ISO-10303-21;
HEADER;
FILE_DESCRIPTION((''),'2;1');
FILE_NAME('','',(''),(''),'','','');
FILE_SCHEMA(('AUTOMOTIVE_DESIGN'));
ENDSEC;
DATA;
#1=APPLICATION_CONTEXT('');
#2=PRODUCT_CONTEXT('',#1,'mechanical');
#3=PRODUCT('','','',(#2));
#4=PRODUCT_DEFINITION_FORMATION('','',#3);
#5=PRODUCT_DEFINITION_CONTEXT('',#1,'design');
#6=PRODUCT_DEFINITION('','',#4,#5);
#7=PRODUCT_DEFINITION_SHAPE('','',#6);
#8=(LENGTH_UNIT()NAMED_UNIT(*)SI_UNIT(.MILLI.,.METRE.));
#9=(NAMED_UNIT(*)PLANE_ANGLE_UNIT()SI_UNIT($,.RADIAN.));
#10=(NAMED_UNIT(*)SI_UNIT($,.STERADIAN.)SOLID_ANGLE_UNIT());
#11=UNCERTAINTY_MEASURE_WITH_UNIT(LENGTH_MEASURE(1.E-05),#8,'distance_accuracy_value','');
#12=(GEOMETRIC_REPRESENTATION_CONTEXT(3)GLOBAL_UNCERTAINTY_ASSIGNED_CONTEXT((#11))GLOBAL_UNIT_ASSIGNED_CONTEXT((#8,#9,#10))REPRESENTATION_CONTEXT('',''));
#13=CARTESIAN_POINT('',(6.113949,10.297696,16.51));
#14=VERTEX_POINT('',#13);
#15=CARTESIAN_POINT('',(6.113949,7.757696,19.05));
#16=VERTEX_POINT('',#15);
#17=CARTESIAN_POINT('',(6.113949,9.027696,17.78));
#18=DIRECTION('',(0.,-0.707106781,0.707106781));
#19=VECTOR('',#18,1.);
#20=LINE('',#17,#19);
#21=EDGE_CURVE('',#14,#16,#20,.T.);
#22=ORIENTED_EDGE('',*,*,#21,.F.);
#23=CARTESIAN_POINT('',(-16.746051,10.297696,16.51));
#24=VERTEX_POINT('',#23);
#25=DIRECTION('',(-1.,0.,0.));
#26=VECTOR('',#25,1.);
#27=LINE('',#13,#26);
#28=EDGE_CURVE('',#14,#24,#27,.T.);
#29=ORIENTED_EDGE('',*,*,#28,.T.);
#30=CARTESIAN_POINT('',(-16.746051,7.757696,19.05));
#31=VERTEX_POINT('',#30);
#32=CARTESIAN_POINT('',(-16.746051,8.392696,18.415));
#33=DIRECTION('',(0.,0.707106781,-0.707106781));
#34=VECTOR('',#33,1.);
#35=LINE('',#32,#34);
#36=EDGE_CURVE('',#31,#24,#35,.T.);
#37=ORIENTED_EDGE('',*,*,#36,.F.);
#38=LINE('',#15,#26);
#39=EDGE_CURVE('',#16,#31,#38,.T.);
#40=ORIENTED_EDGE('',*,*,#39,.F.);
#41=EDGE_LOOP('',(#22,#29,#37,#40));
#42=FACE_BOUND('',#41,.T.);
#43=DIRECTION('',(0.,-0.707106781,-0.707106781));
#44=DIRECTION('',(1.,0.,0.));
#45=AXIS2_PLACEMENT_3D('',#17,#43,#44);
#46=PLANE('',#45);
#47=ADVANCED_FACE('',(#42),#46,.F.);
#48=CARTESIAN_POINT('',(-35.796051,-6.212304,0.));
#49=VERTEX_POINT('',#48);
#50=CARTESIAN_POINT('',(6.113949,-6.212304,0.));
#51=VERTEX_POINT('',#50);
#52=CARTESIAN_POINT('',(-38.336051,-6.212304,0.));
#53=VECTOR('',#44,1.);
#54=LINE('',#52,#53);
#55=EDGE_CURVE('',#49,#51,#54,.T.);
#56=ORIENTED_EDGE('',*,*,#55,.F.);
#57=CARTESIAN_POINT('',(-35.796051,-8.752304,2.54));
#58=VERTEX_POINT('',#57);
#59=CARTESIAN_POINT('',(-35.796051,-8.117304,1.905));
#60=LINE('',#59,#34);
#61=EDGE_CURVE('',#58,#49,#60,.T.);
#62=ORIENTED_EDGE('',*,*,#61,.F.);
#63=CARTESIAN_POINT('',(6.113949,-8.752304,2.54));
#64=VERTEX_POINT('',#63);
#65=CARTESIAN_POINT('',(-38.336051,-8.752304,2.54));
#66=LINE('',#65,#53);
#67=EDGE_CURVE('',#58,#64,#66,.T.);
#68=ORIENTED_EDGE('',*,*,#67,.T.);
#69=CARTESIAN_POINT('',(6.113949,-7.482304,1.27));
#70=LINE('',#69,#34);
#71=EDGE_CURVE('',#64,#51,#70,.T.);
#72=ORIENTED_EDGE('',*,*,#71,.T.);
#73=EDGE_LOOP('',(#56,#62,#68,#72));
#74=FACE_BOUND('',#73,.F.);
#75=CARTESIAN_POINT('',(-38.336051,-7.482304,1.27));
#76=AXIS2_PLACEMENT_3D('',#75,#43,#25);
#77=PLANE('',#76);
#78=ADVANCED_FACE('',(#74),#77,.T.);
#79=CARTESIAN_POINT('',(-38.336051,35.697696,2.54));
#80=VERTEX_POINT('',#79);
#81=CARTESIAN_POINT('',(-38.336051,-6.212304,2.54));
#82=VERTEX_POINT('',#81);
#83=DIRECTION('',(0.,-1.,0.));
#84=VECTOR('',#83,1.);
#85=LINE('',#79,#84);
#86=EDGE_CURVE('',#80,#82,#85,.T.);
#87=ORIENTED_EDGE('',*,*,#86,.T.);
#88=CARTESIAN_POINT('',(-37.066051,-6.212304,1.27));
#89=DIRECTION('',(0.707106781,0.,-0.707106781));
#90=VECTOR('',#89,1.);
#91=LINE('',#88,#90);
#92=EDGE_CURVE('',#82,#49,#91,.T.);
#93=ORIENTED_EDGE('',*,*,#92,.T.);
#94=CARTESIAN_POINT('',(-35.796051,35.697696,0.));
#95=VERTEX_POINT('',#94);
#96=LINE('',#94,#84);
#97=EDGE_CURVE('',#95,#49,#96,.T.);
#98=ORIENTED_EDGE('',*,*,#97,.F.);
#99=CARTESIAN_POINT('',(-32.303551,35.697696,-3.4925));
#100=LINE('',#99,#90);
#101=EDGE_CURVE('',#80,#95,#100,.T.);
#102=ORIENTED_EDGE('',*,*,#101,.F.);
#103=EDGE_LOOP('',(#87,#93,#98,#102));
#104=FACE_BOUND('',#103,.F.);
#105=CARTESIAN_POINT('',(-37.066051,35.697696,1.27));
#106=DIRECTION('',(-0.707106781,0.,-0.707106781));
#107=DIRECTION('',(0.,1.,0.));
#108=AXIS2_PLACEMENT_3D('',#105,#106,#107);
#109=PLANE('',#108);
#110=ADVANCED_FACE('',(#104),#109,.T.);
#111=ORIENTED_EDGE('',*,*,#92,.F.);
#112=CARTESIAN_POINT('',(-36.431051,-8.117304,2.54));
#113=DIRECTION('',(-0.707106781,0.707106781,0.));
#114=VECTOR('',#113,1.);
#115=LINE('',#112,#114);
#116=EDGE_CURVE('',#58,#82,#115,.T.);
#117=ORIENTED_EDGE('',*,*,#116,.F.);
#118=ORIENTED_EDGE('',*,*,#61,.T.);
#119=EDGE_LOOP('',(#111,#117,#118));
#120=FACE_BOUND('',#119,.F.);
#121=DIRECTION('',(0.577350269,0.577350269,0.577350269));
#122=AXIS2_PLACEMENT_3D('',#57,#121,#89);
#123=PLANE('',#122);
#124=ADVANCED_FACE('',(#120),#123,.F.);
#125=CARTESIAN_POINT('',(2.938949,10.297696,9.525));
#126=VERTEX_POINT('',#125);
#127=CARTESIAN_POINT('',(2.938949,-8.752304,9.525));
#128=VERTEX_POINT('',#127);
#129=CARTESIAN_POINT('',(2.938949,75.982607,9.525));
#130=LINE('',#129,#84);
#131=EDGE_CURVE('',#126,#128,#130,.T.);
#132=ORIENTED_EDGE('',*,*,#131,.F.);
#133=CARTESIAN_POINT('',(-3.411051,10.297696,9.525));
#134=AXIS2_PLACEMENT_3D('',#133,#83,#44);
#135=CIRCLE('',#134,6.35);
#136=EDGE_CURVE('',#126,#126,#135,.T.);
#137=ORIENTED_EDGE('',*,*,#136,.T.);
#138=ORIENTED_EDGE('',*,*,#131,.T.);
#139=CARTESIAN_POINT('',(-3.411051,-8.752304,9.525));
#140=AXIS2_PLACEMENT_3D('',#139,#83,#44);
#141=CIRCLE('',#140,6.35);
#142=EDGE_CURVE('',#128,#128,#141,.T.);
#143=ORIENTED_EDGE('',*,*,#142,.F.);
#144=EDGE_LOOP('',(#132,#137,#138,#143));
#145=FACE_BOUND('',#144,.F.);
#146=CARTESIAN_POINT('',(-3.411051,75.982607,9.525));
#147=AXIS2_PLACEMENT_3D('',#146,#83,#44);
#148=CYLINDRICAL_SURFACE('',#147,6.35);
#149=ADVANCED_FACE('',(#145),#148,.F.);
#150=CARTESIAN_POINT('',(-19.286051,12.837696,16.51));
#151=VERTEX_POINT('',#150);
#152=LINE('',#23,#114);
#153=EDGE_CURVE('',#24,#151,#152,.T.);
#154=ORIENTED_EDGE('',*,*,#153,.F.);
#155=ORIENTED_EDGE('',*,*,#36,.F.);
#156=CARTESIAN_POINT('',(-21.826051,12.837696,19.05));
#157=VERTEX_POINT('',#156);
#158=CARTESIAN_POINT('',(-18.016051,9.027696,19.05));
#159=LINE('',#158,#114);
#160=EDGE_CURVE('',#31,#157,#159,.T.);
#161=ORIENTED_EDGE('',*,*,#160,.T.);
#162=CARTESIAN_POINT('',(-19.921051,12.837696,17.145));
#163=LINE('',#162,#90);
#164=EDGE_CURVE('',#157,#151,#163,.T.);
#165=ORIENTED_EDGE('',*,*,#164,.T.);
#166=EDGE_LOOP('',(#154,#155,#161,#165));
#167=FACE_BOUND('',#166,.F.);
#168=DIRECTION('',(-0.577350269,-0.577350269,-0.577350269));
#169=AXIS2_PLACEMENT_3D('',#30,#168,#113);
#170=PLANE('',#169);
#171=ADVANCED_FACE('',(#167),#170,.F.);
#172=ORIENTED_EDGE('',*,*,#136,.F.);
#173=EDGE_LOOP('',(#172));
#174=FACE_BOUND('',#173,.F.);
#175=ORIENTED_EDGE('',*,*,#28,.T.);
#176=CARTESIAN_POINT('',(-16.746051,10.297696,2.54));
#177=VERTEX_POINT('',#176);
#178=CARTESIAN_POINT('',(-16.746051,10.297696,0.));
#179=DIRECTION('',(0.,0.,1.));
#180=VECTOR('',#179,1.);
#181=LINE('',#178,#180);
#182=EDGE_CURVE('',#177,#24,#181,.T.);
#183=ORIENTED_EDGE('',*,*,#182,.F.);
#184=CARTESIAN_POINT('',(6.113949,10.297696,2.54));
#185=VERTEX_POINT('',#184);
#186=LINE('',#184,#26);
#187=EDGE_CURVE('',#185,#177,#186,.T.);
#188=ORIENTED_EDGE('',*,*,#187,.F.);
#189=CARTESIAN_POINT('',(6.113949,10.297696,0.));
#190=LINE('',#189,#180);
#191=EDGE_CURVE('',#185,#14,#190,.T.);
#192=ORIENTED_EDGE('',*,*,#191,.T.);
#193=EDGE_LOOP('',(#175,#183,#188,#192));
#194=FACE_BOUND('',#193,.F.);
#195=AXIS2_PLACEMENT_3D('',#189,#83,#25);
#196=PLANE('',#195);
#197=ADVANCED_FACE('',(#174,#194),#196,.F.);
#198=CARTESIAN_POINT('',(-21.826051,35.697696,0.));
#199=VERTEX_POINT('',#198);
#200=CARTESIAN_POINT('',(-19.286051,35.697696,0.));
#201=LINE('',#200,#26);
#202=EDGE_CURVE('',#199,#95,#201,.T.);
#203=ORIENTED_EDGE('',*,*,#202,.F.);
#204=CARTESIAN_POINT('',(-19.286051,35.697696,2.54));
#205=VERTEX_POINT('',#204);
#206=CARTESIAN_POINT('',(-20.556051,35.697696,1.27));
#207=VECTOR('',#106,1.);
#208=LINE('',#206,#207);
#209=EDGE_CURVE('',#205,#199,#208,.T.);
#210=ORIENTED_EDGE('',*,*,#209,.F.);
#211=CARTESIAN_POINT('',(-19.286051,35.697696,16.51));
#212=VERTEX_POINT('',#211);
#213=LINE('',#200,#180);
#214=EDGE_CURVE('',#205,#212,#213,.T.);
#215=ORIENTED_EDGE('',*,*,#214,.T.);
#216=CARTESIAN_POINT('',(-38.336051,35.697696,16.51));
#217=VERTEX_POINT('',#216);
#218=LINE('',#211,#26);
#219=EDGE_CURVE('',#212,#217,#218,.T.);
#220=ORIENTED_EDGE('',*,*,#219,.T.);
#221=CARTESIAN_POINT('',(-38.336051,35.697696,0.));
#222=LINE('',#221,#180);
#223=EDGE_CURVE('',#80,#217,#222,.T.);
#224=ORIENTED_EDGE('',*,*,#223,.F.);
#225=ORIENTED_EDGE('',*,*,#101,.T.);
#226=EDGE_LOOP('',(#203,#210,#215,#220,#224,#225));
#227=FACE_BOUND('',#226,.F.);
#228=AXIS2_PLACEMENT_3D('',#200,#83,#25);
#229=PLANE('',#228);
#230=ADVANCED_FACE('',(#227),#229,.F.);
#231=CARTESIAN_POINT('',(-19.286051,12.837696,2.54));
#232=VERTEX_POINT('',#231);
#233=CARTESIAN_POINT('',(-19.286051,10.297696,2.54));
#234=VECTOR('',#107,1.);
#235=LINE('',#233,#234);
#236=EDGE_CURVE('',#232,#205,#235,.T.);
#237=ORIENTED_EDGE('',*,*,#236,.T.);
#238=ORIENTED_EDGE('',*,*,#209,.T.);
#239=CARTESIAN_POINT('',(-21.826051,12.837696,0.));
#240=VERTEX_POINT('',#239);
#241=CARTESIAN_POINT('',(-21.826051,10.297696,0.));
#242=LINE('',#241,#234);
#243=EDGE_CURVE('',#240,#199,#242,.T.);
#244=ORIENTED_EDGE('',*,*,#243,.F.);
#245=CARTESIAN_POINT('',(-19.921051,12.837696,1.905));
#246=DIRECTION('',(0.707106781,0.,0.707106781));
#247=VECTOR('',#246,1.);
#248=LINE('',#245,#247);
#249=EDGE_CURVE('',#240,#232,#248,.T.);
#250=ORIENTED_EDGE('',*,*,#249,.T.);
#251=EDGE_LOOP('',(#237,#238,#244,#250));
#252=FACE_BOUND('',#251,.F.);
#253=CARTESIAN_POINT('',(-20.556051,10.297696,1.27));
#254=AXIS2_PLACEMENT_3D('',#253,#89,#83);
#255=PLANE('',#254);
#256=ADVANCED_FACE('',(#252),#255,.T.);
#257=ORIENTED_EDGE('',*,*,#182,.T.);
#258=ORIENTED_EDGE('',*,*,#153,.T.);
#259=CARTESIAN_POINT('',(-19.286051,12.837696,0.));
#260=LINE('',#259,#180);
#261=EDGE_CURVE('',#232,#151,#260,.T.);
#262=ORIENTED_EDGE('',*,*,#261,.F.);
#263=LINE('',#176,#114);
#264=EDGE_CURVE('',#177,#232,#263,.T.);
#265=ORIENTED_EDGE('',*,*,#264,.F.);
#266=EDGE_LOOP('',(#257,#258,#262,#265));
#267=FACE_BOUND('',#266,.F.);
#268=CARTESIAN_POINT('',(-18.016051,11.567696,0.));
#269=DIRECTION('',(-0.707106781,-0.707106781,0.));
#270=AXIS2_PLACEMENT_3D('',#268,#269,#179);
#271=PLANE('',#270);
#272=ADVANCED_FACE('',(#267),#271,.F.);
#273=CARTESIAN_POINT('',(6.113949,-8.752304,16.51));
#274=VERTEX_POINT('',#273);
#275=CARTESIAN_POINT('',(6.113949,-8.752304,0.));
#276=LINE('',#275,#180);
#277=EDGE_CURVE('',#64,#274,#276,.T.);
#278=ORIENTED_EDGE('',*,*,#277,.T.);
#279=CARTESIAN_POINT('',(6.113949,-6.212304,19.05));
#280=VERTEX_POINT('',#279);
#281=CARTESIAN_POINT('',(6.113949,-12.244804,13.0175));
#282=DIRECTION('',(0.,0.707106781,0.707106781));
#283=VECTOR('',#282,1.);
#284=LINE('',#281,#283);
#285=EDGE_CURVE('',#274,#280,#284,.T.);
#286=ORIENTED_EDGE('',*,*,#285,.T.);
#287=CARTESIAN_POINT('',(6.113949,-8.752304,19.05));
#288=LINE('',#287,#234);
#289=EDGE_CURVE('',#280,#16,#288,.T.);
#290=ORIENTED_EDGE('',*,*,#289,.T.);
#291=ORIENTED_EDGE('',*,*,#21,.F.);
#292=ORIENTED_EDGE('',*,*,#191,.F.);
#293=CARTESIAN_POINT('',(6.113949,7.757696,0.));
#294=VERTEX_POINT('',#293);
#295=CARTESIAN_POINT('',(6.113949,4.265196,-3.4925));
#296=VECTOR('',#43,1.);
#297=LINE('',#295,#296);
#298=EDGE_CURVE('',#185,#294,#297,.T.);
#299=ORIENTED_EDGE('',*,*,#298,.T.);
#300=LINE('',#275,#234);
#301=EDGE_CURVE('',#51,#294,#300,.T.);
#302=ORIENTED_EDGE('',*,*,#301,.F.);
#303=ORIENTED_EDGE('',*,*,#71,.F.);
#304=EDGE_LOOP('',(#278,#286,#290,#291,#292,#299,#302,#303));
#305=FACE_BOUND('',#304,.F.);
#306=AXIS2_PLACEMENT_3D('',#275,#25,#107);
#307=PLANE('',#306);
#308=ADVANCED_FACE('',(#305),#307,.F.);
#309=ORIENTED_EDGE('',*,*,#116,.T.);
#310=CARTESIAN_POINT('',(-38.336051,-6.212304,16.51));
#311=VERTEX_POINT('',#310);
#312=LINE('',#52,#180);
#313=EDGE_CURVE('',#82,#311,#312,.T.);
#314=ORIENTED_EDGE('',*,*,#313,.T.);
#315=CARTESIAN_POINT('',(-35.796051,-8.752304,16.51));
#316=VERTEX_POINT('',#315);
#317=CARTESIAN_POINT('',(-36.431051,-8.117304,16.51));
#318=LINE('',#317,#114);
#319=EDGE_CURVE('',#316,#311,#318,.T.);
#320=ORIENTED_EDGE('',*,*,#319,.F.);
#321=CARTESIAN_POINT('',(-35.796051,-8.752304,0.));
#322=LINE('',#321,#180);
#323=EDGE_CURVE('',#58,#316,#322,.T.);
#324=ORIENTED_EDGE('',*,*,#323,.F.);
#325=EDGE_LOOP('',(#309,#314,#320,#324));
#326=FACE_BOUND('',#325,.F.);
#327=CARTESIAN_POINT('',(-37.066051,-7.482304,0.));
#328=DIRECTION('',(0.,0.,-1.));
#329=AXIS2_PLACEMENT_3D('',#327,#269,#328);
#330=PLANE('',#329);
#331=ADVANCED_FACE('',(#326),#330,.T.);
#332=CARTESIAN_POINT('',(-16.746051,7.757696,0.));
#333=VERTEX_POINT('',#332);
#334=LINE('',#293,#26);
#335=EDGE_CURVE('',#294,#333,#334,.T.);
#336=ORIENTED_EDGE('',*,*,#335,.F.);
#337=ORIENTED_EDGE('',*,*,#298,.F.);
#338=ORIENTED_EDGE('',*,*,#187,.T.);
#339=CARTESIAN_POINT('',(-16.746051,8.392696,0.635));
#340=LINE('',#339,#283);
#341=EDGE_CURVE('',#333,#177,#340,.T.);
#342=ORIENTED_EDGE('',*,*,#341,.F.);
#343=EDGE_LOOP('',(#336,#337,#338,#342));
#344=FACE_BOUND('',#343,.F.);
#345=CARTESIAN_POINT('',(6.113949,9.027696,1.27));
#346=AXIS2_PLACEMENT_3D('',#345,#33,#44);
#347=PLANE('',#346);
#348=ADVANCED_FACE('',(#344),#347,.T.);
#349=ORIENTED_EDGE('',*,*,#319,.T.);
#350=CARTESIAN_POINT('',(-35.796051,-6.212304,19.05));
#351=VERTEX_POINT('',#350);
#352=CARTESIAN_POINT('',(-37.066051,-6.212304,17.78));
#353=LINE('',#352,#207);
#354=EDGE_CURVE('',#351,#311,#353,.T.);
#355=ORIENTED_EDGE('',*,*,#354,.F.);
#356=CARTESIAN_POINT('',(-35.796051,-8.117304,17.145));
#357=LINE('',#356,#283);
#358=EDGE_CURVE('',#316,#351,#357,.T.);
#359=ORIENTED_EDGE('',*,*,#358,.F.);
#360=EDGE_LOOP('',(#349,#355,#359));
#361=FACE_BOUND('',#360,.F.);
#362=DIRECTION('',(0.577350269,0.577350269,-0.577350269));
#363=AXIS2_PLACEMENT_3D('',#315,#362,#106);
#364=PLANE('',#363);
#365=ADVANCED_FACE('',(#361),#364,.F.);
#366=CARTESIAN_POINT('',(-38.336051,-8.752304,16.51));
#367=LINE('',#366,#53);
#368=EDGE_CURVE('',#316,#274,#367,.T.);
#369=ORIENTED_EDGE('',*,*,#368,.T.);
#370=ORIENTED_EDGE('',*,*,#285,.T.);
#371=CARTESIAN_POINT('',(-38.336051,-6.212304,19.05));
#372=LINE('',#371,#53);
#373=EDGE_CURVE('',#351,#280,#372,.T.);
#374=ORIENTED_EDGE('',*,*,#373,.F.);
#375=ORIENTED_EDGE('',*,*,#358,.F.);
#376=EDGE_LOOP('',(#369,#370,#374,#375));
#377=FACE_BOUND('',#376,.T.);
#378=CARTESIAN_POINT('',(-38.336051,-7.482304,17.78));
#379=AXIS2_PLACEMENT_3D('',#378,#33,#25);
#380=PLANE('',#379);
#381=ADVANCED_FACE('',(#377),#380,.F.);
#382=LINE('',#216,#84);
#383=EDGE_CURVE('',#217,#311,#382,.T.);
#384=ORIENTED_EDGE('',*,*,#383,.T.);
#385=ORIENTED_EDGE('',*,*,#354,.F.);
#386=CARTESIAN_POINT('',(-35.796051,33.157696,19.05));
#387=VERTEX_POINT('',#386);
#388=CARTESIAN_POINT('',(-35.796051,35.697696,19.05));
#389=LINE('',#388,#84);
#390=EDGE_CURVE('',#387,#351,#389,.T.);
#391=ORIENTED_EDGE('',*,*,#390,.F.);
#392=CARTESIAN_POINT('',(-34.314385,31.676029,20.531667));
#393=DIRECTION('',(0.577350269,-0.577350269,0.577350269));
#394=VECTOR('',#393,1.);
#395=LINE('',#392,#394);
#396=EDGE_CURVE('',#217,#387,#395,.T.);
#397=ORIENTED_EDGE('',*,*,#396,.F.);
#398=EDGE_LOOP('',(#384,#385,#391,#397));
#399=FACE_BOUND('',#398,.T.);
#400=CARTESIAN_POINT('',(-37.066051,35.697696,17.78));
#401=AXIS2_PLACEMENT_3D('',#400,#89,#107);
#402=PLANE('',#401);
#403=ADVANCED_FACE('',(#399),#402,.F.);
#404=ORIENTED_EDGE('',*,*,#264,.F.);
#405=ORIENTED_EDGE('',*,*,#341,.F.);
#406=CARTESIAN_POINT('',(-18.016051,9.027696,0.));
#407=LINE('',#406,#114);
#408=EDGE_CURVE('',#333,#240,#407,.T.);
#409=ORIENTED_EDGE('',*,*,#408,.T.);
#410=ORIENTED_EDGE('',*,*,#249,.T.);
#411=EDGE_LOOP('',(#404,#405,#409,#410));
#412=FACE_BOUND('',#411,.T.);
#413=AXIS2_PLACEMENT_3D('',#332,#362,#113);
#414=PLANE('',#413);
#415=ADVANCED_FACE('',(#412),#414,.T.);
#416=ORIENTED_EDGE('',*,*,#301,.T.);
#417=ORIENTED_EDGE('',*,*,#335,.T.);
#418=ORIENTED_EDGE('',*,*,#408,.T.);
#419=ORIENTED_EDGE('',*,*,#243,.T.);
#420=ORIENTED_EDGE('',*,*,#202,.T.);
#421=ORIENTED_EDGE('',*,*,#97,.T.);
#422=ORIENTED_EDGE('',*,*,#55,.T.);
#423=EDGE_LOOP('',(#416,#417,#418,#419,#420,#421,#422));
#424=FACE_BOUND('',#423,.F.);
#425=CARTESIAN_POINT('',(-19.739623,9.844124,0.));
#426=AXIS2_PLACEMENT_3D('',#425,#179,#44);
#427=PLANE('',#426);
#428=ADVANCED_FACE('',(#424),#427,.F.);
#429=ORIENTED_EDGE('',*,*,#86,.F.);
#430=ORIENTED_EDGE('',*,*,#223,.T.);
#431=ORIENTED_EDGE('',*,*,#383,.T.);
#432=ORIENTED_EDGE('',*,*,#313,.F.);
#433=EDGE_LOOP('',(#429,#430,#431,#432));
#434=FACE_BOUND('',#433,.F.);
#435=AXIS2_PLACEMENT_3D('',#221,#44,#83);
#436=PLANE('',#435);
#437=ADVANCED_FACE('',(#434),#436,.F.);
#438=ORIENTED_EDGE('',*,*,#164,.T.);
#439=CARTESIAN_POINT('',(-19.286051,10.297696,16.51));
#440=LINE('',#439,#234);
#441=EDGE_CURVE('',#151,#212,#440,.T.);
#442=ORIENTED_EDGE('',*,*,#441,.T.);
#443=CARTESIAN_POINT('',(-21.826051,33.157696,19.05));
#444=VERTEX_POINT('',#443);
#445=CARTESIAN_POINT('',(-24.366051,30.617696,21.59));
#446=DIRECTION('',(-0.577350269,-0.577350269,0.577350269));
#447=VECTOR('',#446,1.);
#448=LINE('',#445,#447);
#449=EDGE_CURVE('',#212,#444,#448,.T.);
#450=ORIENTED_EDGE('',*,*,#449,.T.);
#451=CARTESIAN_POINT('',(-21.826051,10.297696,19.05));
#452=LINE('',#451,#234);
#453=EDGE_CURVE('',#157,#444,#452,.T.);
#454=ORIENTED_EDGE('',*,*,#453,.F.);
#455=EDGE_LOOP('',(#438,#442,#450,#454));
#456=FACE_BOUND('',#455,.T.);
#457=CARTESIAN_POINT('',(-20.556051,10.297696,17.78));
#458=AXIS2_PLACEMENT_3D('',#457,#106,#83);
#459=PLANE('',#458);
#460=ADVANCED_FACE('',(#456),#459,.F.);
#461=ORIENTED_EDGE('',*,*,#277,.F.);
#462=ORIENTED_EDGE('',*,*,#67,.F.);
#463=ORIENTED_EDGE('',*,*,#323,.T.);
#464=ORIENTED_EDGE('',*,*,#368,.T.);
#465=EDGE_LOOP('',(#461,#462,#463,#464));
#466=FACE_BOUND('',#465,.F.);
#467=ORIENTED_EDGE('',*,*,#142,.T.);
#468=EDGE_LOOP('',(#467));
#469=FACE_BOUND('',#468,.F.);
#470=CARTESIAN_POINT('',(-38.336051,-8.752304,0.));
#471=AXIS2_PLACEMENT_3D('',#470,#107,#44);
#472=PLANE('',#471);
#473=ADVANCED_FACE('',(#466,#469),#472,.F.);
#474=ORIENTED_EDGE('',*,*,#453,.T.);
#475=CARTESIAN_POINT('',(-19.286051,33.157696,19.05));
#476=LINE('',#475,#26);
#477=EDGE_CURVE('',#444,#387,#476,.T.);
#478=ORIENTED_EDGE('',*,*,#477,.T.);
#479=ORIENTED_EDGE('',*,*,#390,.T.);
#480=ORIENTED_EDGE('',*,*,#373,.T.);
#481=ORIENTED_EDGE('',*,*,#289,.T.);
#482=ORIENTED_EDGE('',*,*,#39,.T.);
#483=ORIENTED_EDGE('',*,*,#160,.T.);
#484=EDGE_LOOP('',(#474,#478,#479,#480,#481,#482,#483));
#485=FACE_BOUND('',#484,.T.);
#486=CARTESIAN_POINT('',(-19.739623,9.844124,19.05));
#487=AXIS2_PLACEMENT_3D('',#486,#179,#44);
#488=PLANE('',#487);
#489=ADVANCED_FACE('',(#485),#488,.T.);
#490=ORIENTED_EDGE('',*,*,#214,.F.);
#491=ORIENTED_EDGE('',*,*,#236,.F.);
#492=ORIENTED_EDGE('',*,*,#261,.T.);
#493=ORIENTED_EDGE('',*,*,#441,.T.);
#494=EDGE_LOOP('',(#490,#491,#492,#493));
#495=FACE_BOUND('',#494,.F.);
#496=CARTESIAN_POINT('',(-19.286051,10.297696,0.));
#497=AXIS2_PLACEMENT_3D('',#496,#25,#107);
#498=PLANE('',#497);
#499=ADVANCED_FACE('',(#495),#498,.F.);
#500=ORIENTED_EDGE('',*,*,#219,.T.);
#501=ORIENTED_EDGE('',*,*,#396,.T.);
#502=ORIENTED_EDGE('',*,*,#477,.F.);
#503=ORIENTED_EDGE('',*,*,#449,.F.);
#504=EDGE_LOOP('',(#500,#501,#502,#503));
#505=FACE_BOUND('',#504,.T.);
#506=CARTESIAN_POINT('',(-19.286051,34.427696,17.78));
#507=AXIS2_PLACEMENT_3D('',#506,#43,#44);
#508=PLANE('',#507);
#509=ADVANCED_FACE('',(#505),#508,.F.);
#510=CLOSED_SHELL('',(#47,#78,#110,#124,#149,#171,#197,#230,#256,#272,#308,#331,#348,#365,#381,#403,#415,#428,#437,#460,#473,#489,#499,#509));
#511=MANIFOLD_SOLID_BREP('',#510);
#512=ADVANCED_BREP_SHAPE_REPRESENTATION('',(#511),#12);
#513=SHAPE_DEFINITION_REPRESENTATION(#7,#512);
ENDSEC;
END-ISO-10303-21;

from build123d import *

# Parameters (mm, degrees)
F1_DEPTH = 19.05
F2_SIZE  = 2.54
F4_D     = 12.7


with BuildPart() as f1:
    # F0 (on Top) → F1 (new body)
    with BuildSketch(Plane.XY):
        Polygon((-19.2860513926, 35.6976958707), (-38.3360513926, 35.6976958707), (-38.3360513926, -8.7523041293), (6.1139486074, -8.7523041293), (6.1139486074, 10.2976958707), (-19.2860513926, 10.2976958707), align=None)
    extrude(amount=F1_DEPTH)

    # F2
    f2_edges = [f1.edges().sort_by_distance(p)[0] for p in [
        (-19.286051, 10.297696, 9.525),
        (-28.811051, 35.697696, 19.05),
        (-38.336051, 13.472696, 19.05),
        (-16.111051, -8.752304, 19.05),
        (-38.336051, 13.472696, 0),
        (-38.336051, -8.752304, 9.525),
        (-16.111051, -8.752304, 0),
        (-6.586051, 10.297696, 0),
        (-6.586051, 10.297696, 19.05),
        (-19.286051, 22.997696, 0),
        (-19.286051, 22.997696, 19.05),
    ]]
    chamfer(f2_edges, length=F2_SIZE)

    # F4 (through all)
    with Locations(Plane(origin=(0, 10.2976958707, 0), x_dir=(-1, 0, 0), z_dir=(0, 1, 0))):
        with Locations((3.4110513926, 9.525)):
            Hole(F4_D / 2)


solid = f1.part
